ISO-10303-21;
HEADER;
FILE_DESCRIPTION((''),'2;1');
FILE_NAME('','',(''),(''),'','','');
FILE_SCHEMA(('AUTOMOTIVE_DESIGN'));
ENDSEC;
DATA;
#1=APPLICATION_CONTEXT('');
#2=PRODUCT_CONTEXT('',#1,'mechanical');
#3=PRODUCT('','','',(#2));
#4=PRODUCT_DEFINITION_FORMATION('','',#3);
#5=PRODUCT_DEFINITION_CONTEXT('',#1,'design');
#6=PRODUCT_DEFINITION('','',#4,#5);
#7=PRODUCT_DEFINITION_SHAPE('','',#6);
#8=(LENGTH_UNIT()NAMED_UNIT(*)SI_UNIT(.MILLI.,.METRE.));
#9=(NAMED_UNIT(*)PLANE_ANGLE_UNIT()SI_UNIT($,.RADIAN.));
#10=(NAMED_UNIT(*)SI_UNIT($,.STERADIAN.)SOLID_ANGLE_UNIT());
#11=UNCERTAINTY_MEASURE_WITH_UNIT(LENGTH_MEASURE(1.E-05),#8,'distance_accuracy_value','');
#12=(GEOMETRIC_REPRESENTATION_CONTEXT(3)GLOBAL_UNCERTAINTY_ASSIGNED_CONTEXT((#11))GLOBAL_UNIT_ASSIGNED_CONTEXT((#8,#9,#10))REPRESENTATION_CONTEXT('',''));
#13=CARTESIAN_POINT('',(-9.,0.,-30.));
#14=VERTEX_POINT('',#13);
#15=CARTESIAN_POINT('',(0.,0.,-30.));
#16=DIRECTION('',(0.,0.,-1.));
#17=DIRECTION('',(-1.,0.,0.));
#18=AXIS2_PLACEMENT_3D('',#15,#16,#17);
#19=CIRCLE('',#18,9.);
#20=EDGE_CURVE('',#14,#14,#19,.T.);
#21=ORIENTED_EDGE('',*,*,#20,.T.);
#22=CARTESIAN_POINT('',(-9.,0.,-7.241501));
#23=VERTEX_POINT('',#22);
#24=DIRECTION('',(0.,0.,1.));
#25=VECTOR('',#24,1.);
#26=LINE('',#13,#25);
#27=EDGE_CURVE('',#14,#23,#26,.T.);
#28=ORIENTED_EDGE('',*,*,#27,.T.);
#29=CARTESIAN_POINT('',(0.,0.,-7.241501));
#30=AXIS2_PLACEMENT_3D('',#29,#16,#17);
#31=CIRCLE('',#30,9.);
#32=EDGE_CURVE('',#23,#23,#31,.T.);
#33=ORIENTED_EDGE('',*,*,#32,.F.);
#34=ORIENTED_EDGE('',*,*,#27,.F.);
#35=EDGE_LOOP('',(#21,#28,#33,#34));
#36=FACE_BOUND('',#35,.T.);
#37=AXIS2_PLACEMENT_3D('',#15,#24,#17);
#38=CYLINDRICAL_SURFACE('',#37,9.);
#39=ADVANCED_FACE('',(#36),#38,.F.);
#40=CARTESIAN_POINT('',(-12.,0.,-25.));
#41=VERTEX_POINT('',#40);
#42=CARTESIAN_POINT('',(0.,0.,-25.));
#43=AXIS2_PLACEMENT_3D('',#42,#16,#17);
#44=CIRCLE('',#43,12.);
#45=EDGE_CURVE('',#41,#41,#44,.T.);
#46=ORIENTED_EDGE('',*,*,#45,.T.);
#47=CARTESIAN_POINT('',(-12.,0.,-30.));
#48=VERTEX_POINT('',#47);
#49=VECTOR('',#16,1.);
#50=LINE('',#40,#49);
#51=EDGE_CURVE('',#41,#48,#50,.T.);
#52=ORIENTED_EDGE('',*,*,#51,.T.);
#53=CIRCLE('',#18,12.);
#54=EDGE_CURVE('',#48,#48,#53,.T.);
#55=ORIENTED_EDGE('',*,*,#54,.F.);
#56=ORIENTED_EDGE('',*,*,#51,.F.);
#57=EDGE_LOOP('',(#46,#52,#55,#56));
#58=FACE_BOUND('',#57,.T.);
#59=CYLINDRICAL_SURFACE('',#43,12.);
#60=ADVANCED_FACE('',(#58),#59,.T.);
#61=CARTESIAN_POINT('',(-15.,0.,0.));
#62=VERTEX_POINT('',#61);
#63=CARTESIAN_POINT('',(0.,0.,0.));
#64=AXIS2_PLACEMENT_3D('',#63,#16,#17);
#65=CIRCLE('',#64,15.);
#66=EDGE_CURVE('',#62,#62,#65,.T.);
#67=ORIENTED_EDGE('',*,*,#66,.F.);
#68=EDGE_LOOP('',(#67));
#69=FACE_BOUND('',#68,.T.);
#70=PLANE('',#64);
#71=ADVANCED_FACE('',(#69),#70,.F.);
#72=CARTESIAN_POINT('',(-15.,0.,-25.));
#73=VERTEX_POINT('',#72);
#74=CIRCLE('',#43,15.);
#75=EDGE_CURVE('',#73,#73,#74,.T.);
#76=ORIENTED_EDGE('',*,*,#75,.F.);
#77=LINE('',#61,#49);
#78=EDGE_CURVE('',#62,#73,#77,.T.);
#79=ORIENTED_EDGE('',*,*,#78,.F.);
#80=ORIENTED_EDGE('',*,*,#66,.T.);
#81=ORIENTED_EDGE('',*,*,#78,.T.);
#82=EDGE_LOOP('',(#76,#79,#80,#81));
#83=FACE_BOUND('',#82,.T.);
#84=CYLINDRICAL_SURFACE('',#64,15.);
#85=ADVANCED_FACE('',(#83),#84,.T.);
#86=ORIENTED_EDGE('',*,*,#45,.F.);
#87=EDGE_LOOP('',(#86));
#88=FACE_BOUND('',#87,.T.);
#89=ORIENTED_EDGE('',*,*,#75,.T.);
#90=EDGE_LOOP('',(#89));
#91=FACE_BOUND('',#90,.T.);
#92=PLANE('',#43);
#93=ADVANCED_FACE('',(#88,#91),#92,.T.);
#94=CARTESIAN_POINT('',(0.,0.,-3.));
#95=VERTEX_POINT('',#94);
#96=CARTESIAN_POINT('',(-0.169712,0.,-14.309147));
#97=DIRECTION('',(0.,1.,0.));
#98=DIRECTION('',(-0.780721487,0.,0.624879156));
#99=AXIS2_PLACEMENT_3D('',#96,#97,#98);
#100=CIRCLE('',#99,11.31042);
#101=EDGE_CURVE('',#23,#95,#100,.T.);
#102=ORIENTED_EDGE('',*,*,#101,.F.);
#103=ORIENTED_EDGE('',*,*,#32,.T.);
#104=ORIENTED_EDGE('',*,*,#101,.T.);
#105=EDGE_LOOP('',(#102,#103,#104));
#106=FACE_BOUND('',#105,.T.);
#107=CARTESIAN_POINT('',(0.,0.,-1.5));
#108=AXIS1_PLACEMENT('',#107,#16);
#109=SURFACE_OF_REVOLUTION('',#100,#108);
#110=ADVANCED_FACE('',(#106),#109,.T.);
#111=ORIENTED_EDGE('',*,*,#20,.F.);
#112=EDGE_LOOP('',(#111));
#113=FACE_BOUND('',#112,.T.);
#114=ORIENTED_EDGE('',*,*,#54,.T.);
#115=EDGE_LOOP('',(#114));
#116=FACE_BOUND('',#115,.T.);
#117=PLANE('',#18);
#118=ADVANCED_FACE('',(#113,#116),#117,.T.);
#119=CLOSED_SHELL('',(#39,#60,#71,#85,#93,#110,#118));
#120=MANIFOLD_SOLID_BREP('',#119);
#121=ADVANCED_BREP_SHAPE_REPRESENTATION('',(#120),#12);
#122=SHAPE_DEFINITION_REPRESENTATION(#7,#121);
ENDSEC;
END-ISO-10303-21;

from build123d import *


# Not quite as in the source:
# - a feature names something its author has since deleted; it is built from what else it names


with BuildPart() as f1:
    # F0 (on Front) → F1 (revolve)
    with BuildSketch(Plane.XZ):
        with BuildLine():
            Line((-15, -25), (-12, -25))
            Line((-12, -25), (-12, -30))
            Line((-12, -30), (-9, -30))
            Line((-9, -30), (-9, -7.2415010072))
            ThreePointArc((-9, -7.2415010072), (-4.9914312836, -4.0779872119), (0, -3))
            Line((0, -3), (0, 0))
            Line((0, 0), (-15, 0))
            Line((-15, 0), (-15, -3))
            Line((-15, -3), (-15, -25))
        make_face()
    revolve(axis=Axis((0, 0, -1.5), (0, 0, -1)))


solid = f1.part
